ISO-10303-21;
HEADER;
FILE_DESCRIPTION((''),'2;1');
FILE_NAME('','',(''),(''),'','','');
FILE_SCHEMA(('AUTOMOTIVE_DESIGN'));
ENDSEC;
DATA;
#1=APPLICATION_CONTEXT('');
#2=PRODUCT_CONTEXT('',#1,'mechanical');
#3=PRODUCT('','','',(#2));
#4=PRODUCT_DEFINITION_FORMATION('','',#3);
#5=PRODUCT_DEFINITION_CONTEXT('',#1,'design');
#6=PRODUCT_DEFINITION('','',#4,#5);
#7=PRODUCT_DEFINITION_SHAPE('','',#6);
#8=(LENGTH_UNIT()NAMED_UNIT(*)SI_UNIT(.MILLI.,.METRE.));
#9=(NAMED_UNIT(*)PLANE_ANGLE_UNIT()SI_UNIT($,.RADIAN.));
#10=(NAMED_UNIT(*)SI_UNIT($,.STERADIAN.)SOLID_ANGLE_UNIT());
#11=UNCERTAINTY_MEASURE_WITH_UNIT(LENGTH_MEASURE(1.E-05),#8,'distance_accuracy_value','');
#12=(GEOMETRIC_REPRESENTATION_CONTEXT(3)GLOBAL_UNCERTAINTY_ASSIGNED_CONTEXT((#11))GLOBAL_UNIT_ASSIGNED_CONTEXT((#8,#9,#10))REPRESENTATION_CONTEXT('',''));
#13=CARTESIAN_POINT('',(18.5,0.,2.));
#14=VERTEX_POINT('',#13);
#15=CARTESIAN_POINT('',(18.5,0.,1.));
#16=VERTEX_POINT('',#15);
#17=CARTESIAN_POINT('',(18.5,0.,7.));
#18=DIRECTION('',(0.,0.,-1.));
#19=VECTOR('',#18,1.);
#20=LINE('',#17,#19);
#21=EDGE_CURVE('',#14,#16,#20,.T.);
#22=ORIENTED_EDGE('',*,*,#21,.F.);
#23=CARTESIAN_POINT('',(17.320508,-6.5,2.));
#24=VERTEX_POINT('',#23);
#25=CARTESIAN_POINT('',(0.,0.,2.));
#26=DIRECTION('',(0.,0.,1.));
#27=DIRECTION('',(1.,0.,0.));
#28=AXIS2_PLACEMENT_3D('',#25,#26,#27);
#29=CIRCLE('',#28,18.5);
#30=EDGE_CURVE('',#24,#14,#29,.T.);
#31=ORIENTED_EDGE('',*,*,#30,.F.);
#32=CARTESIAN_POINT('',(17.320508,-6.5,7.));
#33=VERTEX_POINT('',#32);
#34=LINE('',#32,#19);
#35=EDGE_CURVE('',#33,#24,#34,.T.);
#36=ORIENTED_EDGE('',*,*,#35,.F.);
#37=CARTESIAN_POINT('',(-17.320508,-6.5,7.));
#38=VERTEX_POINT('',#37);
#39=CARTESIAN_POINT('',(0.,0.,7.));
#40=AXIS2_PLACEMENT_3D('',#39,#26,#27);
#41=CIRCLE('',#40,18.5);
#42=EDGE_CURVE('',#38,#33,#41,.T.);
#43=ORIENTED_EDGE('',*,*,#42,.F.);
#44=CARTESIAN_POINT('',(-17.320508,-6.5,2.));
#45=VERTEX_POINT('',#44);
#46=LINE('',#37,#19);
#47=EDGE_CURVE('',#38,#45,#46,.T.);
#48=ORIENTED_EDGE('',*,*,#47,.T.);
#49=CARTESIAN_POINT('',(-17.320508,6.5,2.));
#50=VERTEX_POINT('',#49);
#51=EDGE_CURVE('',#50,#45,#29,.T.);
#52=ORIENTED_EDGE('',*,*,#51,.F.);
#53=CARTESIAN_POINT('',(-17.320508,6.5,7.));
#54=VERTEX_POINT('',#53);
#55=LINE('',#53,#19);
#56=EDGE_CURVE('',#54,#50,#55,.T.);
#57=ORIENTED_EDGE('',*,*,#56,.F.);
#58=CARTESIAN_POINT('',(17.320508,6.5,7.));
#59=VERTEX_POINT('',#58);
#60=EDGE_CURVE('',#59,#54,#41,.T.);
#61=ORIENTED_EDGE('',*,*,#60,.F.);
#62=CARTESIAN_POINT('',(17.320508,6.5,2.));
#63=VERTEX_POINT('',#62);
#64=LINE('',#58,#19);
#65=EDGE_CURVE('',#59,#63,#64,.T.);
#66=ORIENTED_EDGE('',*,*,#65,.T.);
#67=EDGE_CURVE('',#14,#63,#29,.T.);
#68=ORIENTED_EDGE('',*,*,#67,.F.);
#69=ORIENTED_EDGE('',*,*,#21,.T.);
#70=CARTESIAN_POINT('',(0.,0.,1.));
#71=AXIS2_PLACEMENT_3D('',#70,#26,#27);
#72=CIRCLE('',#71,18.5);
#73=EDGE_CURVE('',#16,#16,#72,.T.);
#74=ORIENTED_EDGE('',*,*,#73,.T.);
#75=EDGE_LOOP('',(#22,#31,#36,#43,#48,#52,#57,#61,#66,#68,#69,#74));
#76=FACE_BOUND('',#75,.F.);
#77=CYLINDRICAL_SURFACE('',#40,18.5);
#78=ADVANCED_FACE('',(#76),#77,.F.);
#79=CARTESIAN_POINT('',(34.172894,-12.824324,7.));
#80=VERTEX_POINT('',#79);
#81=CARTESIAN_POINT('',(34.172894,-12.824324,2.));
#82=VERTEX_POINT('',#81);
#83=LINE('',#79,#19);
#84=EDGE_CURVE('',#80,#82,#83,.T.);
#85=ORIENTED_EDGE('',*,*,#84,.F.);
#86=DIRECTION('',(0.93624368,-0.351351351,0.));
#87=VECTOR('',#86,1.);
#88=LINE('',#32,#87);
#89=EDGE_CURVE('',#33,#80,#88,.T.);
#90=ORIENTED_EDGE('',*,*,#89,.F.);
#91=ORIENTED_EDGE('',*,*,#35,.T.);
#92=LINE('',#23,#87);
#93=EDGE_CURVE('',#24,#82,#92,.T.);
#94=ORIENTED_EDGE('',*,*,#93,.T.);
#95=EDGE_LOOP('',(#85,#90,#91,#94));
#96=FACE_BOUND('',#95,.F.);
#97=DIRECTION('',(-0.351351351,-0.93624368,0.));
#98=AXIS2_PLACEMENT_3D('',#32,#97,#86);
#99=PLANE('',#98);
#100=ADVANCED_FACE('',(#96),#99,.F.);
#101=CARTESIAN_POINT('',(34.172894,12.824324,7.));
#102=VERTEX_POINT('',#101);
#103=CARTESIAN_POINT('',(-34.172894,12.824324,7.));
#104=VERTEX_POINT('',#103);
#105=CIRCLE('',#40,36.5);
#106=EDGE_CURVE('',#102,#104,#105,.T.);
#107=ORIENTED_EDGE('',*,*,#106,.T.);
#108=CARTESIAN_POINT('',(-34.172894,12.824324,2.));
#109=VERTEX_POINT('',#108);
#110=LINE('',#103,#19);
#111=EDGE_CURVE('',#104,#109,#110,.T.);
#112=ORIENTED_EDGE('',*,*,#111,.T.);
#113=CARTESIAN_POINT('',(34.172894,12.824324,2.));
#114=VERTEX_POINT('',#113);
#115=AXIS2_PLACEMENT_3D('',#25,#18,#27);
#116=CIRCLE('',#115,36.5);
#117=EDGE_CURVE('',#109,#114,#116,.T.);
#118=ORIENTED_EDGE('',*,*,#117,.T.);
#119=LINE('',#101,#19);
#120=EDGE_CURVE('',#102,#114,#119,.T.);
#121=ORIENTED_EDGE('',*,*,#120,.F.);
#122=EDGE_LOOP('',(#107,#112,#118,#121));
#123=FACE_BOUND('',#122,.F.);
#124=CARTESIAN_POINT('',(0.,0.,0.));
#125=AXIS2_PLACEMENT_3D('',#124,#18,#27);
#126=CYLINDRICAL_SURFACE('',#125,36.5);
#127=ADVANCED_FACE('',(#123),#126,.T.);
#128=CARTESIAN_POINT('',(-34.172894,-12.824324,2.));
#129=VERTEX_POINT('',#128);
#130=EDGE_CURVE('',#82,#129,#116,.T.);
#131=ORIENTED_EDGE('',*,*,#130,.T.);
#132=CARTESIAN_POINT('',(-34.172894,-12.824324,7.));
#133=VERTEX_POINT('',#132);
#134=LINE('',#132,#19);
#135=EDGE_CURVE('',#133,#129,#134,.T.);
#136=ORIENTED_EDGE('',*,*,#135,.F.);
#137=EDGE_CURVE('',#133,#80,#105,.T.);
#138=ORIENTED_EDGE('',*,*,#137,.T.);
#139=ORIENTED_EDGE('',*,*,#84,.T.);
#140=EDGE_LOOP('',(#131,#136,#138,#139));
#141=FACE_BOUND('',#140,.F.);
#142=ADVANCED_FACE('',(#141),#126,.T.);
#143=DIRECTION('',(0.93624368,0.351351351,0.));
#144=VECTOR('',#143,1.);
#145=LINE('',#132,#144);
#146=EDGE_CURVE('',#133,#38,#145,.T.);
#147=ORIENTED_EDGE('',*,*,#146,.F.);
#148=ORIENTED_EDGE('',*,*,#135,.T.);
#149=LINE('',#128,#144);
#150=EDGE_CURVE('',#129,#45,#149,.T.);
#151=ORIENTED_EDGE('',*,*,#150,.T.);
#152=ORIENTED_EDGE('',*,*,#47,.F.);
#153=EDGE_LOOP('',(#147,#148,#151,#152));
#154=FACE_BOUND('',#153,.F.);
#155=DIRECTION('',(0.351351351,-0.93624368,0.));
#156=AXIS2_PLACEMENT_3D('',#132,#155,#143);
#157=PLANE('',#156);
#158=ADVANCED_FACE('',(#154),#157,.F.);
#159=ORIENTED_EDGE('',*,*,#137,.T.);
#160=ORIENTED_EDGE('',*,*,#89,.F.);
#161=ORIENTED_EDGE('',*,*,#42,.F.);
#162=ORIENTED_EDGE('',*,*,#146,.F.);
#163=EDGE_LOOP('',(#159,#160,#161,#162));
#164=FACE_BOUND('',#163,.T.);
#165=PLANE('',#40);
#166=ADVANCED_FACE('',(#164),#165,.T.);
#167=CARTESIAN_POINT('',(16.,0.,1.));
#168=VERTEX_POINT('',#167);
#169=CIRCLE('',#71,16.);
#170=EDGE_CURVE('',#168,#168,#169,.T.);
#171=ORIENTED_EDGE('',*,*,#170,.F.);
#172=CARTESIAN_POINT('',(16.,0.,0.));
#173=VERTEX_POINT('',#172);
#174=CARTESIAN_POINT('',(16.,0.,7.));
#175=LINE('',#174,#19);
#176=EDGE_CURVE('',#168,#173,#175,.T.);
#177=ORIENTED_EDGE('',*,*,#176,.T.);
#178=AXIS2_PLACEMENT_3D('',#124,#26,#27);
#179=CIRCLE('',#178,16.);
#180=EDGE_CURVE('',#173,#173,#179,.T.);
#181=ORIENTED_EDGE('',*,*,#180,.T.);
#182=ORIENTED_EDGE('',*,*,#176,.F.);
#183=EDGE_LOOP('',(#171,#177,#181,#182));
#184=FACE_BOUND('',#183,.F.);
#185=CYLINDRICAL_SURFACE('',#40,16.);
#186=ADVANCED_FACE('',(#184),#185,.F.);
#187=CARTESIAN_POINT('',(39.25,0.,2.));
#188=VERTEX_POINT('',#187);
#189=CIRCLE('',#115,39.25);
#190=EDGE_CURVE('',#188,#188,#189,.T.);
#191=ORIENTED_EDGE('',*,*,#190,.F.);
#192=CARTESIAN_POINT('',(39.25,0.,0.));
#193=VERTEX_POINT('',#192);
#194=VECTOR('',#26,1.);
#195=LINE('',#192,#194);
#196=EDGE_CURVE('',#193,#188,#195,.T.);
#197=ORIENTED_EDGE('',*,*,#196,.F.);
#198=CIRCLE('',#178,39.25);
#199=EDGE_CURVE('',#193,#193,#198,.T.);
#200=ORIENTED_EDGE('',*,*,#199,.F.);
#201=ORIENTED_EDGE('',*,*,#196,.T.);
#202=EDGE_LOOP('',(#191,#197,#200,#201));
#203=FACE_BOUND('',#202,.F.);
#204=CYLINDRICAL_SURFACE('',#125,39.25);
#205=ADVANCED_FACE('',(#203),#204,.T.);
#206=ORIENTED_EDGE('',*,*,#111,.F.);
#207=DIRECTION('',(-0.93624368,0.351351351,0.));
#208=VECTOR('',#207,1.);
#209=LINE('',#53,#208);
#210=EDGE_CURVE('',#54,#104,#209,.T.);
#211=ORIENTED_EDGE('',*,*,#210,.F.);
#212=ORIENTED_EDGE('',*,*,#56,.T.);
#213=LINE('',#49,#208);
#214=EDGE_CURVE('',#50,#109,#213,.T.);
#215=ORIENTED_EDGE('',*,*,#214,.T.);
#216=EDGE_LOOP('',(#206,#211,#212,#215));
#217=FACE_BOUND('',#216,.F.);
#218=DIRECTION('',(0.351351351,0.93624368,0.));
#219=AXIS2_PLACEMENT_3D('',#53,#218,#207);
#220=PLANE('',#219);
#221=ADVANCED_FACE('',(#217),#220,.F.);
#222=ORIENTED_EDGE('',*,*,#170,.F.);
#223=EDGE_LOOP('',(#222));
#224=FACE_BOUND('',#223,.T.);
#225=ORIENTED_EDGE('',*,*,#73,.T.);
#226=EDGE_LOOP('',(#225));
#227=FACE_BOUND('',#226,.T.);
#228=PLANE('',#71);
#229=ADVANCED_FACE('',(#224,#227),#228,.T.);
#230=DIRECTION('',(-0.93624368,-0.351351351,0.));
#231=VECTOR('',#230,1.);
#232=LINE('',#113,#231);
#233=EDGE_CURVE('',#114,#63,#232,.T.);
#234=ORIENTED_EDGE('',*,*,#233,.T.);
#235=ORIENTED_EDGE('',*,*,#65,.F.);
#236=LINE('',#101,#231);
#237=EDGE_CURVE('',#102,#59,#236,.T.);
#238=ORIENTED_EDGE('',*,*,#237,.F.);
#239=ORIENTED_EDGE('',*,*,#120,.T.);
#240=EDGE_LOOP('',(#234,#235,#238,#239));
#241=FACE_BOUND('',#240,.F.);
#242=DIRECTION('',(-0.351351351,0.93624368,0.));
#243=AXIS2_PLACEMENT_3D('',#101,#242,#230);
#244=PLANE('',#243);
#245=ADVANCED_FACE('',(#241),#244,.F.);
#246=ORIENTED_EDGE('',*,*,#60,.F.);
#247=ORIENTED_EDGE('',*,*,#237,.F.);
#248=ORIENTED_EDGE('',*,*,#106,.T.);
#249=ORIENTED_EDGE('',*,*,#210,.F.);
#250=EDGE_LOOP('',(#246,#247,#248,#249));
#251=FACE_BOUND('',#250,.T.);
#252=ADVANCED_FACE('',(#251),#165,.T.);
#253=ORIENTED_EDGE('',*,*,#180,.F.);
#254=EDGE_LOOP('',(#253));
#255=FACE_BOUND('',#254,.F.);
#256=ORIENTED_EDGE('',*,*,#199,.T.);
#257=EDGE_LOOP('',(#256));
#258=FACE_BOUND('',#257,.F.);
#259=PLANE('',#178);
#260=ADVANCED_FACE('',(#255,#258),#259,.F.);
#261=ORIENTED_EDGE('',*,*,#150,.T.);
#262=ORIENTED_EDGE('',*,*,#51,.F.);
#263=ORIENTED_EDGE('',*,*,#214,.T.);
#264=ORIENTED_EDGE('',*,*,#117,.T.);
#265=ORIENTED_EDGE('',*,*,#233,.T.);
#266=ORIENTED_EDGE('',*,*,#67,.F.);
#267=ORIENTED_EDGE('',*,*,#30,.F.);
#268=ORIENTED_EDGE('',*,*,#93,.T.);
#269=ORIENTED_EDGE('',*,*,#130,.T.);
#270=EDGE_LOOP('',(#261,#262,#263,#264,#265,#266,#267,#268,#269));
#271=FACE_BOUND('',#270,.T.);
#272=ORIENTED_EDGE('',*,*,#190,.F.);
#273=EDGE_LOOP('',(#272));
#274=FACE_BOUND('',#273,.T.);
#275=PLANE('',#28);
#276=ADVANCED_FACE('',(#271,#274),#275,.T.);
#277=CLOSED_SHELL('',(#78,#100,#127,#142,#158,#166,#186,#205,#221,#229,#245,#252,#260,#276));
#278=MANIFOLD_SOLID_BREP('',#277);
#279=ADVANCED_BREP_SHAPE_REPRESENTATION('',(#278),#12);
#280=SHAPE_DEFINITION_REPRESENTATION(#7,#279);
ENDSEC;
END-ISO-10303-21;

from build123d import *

# Parameters (mm, degrees)
F0_R     = 36.5
F0_R_2   = 31.5
F1_DEPTH = 7
F0_R_3   = 39.25
F2_DEPTH = 2
F3_R     = 18.5
F3_R_2   = 16
F4_DEPTH = 6
F5_DEPTH = 25
F7_DEPTH = 5


with BuildPart() as f1:
    # F0 (on Top) → F1 (new body)
    with BuildSketch(Plane.XY):
        Circle(F0_R)
        Circle(F0_R_2, mode=Mode.SUBTRACT)
        Circle(F0_R_2)
    extrude(amount=F1_DEPTH)

    # F0 (on Top) → F2 (join)
    with BuildSketch(Plane.XY):
        Circle(F0_R_3)
        Circle(F0_R, mode=Mode.SUBTRACT)
        Circle(F0_R)
        Circle(F0_R_2, mode=Mode.SUBTRACT)
    extrude(amount=F2_DEPTH)

    # F3 (on face) → F4 (cut)
    with BuildSketch(Plane.XY.offset(7)):
        Circle(F3_R)
        Circle(F3_R_2, mode=Mode.SUBTRACT)
        Circle(F3_R_2)
    extrude(amount=-F4_DEPTH, mode=Mode.SUBTRACT)

    # F3 (on face) → F5 (cut)
    with BuildSketch(Plane.XY.offset(7)):
        Circle(F3_R_2)
    extrude(amount=-F5_DEPTH, mode=Mode.SUBTRACT)

    # F6 (on face) → F7 (cut)
    with BuildSketch(Plane.XY.offset(7)):
        Polygon((17.3205080757, -6.5), (40, -6.5), (40, 6.5), (17.3205080757, 6.5), (-17.3205080757, 6.5), (-40, 6.5), (-40, -6.5), (-17.3205080757, -6.5), align=None)
        with BuildLine():
            Line((-35.9165699921, 6.5), (-17.3205080757, 6.5))
            Line((-17.3205080757, 6.5), (-34.1728943115, 12.8243243243))
            ThreePointArc((-34.1728943115, 12.8243243243), (-35.1871073141, 9.7014163331), (-35.9165699921, 6.5))
        make_face()
        with BuildLine():
            Line((-34.1728943115, -12.8243243243), (-17.3205080757, -6.5))
            Line((-17.3205080757, -6.5), (-35.9165699921, -6.5))
            ThreePointArc((-35.9165699921, -6.5), (-35.1871073141, -9.7014163331), (-34.1728943115, -12.8243243243))
        make_face()
        with BuildLine():
            Line((35.9165699921, -6.5), (17.3205080757, -6.5))
            Line((17.3205080757, -6.5), (34.1728943115, -12.8243243243))
            ThreePointArc((34.1728943115, -12.8243243243), (35.1871073141, -9.7014163331), (35.9165699921, -6.5))
        make_face()
        with BuildLine():
            Line((34.1728943115, 12.8243243243), (17.3205080757, 6.5))
            Line((17.3205080757, 6.5), (35.9165699921, 6.5))
            ThreePointArc((35.9165699921, 6.5), (35.1871073141, 9.7014163331), (34.1728943115, 12.8243243243))
        make_face()
    extrude(amount=-F7_DEPTH, mode=Mode.SUBTRACT)


solid = f1.part
